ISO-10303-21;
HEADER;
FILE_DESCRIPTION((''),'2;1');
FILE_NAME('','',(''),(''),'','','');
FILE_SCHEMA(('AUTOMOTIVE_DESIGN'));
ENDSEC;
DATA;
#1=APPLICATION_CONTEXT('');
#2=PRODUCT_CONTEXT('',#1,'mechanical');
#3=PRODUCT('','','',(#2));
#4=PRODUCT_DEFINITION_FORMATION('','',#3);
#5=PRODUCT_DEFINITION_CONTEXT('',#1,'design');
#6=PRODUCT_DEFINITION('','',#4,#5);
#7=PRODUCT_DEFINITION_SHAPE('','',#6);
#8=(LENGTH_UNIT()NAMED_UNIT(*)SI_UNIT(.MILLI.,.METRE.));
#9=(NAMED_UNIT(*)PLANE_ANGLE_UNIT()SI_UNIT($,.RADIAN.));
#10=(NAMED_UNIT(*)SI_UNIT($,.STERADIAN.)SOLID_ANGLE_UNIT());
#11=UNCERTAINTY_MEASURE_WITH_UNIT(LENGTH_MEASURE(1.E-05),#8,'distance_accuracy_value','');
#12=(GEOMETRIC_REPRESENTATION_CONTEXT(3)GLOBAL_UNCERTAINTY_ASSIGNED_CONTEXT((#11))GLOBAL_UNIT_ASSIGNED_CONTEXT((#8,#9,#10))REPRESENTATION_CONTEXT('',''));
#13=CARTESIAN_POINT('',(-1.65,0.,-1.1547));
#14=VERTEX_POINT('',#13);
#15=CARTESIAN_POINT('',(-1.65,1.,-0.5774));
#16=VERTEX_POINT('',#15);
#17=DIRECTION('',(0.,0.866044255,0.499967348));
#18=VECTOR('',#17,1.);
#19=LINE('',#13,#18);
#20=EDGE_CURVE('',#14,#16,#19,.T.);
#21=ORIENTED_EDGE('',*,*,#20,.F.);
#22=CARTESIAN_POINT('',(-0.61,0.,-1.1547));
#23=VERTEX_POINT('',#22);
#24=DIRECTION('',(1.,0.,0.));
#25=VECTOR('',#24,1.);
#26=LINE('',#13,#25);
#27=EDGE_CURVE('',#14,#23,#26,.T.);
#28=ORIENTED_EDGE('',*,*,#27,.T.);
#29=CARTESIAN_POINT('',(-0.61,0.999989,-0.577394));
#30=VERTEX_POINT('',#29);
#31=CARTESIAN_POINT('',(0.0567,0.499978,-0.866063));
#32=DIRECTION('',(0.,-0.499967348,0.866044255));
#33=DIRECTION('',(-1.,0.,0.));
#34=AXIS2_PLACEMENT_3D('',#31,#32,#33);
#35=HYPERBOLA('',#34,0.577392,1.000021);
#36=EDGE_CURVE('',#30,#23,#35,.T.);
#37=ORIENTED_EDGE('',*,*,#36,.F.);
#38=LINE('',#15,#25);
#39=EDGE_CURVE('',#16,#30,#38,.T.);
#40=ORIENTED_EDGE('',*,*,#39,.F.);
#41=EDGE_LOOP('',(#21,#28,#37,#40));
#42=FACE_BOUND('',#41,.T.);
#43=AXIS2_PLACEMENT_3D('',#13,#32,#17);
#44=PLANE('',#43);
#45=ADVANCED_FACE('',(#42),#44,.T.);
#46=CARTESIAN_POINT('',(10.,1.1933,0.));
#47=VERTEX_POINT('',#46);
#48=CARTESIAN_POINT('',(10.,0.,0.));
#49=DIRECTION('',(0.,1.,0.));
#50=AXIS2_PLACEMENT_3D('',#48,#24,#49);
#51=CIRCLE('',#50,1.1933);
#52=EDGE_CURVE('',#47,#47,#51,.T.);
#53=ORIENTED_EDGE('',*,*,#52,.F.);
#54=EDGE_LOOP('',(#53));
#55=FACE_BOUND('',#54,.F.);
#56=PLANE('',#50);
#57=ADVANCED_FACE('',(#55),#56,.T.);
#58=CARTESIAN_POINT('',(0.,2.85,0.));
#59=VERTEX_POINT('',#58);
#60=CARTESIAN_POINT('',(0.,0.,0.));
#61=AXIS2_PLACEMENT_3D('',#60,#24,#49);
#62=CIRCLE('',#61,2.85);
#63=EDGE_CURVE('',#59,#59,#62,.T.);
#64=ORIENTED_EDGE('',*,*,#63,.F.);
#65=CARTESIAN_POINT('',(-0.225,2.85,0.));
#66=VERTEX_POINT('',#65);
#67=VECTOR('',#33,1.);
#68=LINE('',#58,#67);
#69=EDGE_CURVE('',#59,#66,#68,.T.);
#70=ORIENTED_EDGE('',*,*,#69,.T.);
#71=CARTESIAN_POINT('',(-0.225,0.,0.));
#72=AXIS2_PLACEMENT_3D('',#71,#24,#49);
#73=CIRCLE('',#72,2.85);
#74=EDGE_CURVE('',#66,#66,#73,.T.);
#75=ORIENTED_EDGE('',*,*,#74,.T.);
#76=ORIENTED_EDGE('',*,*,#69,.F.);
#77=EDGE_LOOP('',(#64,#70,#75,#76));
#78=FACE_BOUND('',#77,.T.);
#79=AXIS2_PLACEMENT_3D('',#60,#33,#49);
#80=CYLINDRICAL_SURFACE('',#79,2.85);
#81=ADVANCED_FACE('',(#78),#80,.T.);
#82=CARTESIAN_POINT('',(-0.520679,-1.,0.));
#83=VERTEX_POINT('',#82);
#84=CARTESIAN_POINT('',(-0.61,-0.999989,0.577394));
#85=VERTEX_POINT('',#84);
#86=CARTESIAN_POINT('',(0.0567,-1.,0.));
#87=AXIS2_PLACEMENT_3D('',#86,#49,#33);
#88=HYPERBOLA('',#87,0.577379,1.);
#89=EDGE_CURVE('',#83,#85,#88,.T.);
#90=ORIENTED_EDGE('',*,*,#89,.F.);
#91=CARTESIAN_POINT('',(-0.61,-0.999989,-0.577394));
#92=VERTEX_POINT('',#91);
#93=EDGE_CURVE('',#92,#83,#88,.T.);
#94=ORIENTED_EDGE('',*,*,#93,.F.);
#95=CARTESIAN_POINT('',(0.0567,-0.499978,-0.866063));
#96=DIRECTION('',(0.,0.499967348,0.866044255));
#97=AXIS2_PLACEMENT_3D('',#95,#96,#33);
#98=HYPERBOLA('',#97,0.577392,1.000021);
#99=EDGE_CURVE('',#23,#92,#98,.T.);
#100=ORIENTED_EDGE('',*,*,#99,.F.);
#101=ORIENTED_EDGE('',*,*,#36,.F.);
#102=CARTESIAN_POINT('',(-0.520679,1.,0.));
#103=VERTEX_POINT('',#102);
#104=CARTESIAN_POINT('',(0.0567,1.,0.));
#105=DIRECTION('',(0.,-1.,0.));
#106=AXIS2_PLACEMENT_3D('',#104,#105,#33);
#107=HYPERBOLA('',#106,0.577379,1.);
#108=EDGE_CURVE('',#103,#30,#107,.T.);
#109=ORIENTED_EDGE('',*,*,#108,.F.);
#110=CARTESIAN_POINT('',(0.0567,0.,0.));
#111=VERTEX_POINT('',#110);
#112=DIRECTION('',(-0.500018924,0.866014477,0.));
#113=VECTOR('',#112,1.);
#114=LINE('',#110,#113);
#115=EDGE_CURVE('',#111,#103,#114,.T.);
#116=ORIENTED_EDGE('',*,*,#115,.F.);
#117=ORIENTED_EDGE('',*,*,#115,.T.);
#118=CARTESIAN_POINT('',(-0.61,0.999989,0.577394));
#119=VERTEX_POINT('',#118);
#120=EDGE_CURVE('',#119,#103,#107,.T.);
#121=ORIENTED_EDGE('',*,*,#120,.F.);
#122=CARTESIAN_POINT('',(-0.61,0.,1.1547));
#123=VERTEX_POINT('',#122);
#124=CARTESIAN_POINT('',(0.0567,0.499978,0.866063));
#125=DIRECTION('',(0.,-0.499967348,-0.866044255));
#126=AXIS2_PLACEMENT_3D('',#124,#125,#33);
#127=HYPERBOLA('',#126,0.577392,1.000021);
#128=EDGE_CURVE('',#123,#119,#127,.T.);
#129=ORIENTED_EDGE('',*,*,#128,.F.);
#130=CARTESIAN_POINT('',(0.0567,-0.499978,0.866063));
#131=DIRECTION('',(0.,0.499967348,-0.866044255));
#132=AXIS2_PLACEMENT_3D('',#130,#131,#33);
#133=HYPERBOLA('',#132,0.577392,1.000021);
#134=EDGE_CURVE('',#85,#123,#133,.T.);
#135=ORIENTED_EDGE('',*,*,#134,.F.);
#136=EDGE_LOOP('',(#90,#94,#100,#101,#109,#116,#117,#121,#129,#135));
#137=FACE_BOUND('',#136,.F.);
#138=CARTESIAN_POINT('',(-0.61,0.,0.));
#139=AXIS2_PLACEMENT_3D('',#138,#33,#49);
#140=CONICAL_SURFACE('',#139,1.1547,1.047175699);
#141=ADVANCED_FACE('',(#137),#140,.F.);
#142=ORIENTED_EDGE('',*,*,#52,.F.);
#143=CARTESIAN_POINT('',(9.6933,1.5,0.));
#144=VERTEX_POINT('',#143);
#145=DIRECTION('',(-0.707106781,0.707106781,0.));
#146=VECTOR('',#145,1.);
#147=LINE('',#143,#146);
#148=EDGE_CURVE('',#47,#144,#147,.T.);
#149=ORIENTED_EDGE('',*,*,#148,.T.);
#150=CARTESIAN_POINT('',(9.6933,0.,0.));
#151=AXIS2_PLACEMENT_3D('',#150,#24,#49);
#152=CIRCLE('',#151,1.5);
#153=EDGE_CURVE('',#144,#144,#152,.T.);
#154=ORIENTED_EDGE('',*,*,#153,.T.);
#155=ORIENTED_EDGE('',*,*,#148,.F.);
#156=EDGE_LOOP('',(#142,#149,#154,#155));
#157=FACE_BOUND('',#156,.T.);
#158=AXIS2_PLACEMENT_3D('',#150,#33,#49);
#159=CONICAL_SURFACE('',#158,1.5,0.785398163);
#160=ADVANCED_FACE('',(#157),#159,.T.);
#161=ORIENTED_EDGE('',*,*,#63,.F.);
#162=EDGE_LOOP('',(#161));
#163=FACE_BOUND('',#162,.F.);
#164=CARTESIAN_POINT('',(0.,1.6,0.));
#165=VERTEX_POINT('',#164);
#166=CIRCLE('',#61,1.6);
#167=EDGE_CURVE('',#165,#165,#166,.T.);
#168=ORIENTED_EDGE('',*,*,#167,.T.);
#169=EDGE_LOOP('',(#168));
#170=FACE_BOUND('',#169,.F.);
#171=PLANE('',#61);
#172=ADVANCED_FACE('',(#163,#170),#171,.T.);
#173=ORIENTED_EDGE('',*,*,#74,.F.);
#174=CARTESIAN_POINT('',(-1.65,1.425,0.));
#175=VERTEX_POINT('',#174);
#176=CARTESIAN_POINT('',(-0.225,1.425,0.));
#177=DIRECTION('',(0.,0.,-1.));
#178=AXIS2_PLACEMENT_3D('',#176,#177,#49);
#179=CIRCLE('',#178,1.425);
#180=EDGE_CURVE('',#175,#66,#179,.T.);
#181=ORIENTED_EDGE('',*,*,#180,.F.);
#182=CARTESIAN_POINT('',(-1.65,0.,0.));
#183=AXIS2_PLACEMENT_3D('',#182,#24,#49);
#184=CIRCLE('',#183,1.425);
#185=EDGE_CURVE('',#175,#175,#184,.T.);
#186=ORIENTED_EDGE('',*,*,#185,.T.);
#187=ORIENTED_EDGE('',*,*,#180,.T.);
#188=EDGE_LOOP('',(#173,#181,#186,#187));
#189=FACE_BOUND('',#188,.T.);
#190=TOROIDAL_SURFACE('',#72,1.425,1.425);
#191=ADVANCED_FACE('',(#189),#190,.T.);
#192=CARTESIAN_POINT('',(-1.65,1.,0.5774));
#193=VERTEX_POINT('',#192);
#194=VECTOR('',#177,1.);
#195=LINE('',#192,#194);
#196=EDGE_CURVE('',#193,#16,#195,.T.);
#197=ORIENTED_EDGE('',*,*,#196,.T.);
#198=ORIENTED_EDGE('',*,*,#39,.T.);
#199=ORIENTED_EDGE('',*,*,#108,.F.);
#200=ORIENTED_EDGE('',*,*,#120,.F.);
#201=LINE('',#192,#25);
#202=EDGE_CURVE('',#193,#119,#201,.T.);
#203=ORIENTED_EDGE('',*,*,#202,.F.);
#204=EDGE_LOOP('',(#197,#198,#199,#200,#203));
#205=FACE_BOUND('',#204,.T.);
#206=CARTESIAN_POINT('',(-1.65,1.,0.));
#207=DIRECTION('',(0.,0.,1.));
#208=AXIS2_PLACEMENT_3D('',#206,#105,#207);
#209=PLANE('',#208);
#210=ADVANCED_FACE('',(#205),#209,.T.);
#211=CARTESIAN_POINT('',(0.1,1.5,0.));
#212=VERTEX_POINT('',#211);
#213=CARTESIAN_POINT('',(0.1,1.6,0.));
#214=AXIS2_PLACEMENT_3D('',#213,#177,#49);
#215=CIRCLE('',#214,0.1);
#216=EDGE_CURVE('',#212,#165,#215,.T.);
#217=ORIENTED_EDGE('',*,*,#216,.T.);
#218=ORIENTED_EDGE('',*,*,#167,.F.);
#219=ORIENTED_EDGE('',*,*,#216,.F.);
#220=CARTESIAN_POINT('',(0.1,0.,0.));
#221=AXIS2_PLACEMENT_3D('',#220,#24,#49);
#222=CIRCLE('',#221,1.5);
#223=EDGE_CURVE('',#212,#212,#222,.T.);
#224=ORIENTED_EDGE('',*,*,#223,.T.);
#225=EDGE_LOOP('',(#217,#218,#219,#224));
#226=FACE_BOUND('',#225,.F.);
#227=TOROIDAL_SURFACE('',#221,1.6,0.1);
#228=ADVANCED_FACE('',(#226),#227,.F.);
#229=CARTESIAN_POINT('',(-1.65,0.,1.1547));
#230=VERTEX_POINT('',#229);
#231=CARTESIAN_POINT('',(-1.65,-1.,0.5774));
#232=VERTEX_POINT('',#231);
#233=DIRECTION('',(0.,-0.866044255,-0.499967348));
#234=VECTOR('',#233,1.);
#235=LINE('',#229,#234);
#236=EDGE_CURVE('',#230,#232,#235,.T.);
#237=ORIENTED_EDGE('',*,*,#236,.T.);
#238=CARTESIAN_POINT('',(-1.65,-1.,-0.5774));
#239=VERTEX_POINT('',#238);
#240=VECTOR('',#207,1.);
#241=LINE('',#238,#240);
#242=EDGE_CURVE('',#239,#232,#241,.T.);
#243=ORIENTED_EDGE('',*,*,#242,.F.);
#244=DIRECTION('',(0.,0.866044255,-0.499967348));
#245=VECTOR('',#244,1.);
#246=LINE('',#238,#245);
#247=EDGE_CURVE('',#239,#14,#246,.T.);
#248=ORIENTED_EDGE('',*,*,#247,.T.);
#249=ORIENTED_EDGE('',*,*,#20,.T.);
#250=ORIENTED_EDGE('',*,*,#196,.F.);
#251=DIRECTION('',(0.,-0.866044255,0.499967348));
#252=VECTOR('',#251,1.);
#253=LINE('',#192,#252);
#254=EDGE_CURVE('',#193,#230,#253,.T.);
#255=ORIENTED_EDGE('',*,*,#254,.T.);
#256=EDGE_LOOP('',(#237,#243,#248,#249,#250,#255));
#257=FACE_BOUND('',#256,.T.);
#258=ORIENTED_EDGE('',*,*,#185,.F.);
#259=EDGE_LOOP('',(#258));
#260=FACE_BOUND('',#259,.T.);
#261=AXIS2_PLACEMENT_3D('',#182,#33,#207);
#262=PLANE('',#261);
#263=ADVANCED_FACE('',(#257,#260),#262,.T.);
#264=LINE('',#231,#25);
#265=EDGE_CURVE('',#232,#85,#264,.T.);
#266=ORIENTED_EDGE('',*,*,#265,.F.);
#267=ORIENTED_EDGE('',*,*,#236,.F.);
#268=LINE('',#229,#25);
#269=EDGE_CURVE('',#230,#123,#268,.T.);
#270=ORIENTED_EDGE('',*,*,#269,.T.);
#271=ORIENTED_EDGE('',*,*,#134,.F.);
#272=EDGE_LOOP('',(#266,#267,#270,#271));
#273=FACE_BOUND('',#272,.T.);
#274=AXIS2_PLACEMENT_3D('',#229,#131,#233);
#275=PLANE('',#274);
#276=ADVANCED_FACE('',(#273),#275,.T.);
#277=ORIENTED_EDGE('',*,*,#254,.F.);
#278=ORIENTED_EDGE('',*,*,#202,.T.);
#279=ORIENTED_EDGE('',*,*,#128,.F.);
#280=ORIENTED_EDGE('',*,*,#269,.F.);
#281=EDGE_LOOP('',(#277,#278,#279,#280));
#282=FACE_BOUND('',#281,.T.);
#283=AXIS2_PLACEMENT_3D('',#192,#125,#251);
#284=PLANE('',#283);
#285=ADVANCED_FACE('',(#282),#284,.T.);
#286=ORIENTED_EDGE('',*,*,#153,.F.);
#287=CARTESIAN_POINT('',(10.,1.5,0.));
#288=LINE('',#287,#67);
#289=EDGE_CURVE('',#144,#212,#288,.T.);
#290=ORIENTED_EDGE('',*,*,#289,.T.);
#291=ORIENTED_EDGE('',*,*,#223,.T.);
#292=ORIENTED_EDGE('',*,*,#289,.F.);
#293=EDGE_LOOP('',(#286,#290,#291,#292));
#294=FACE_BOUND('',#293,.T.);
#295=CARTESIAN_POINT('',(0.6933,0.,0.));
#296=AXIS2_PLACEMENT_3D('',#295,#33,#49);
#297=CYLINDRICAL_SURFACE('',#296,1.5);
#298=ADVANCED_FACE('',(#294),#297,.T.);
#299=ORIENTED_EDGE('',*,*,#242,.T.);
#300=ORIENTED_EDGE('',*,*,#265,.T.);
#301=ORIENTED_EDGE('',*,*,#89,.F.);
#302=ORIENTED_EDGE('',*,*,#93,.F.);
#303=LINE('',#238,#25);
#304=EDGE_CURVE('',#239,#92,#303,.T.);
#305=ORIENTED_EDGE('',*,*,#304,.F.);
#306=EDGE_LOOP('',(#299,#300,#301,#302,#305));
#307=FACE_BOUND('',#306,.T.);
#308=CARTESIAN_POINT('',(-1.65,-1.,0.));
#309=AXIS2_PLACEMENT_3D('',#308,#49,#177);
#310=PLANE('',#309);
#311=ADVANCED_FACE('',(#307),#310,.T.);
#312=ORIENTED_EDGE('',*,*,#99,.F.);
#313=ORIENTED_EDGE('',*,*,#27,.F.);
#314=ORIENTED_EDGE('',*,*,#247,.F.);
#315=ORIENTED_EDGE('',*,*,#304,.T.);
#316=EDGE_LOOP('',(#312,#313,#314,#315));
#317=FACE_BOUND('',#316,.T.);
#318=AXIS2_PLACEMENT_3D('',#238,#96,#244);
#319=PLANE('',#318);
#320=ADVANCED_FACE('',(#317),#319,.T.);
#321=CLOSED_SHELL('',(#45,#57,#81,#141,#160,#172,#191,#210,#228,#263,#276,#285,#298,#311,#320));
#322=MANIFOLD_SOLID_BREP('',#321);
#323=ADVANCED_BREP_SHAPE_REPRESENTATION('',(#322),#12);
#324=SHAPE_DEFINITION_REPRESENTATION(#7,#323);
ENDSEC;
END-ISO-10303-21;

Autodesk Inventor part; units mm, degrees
ref_plane "YZ Plane" through (0, 0, 0) normal (1, 0, 0) x (0, 1, 0)
ref_plane "XZ Plane" through (0, 0, 0) normal (0, 1, 0) x (-1, 0, 0)
sketch "Sketch1" plane through (0, 0, 0) normal (0, 0, 1) x (1, 0, 0)
  line L0 (0.0567, 0) -> (10, 0)
  line L1 (10, 0) -> (10, 1.5)
  line L2 (10, 1.5) -> (1, 1.5)
  line L3 (1, 1.5) -> (0.6933, 1.5)
  line L4 (0.6933, 1.5) -> (0, 1.5)
  line L5 (0, 1.5) -> (0, 2.85)
  line L6 (0, 2.85) -> (-1.65, 2.85)
  line L7 (-1.65, 2.85) -> (-1.65, 1.1547)
  line L8 (-1.65, 1.1547) -> (-0.61, 1.1547)
  line L9 (-0.61, 1.1547) -> (0.0567, 0)
  line L10 (-3.98, 0) -> (12.33, 0) projected
  line L11 (0, -0.57) -> (0, 3.42) projected
  line L12 (1, 1.5) -> (0, 1.5) construction
  dimension "d0" = 9
  dimension "d1" = 0.3067
  dimension "d2" = 1.65
  dimension "d3" = 1.04
  dimension "d4" = 60
  dimension "d5" = 3
  dimension "d6" = 3
  dimension "d7" = 2.3094
  dimension "d8" = 5.7
  dimension "d19" = 10
revolve "Body" add sketch "Sketch1" angle 360 about axis through (0.0567, 0, 0) along (1, 0, 0) contours L9 L11 L4 L3 L2 L1 L0 | L9 L8 L7 L6 L5 L11
sketch "Sketch2" plane through (-1.65, 0, 0) normal (-1, 0, 0) x (0, 0, 1)
  circle A0 centre (0, 0) radius 1.1547 projected
  line L0 (0, -3.99) -> (0, 3.99) projected
  line L1 (-3.99, 0) -> (3.99, 0) projected
  line L2 (1.1547, 0) -> (0.5774, -1)
  line L3 (0.5774, -1) -> (-0.5774, -1)
  line L4 (-0.5774, -1) -> (-1.1547, 0)
  line L5 (-1.1547, 0) -> (-0.5774, 1)
  line L6 (-0.5774, 1) -> (0.5774, 1)
  line L7 (0.5774, 1) -> (1.1547, 0)
extrude "Slot" add sketch "Sketch2" against normal up to next contours L7 A0 | A0 L2 | L6 L0 A0 | A0 L0 L3 | L0 L6 A0 | A0 L3 L0 | L4 A0 | A0 L5
fillet "Fillet1" radius 1.425 1 edges at (-1.65, -2.85, 0)
thread "Thread" size "M3x0.5" class "4g6g" standard "ANSI Metric M Profile" length 9
chamfer "Chamfer1" distance 0.3067 distance2 0.3067 1 edges at (10, -1.5, 0) measured on face at (10, -0.3743, 0.5709)
fillet "Fillet2" radius 0.1 1 edges at (0, -1.5, 0)
ref_plane "Work Plane1" through (30, 0, 0) normal (0, -0.5, 0.8660254) x (1, 0, 0)
equation "\"d29\" = R"
equation "\"d12\" = GEL"
equation "\"d14\" = -0.5 * SPD + 0.5 * GD"
equation "\"d15\" = GUL"
equation "\"d16\" = RR"
equation "\"d0\" = GEL"
equation "\"d1\" = GAL"
equation "\"d2\" = KOH"
equation "\"d3\" = INTI"
equation "\"d5\" = GD"
equation "\"d6\" = BDM"
equation "\"d7\" = 1.1547 * SW"
equation "\"d8\" = KOD"
equation "\"d19\" = NLG"
equation "\"GD\" = NND"
equation "\"NLG\" = 10"
equation "\"GEL\" = 9"
equation "\"KOD\" = 5.7"
equation "\"KOH\" = 1.65"
equation "\"INTI\" = 1.04"
equation "\"GAL\" = 0.61345 * PTC"
equation "\"GUL\" = 0.61345 * PTC"
equation "\"BDM\" = NND"
equation "\"SW\" = 2"
equation "\"RR\" = 1.425"
equation "\"SPD\" = 2.38655"
equation "\"d28\" = R"
equation "\"R\" = 0.1"
equation "\"TOA\" = 30deg"
equation "\"THREADDIA\" = 3"
equation "\"KOD1\" = KOD - 2 * RR"
equation "\"PTC\" = 0.5"
equation "\"NND\" = 3"
equation "\"E0\" = 1.155 * SW"
equation "\"GD1\" = THREADDIA - 1.2269 * PTC"
properties part number "ANSI B18.3.4M - M3 x 0.5 x 6, BHSBHCSM" material "Steel, Mild"
